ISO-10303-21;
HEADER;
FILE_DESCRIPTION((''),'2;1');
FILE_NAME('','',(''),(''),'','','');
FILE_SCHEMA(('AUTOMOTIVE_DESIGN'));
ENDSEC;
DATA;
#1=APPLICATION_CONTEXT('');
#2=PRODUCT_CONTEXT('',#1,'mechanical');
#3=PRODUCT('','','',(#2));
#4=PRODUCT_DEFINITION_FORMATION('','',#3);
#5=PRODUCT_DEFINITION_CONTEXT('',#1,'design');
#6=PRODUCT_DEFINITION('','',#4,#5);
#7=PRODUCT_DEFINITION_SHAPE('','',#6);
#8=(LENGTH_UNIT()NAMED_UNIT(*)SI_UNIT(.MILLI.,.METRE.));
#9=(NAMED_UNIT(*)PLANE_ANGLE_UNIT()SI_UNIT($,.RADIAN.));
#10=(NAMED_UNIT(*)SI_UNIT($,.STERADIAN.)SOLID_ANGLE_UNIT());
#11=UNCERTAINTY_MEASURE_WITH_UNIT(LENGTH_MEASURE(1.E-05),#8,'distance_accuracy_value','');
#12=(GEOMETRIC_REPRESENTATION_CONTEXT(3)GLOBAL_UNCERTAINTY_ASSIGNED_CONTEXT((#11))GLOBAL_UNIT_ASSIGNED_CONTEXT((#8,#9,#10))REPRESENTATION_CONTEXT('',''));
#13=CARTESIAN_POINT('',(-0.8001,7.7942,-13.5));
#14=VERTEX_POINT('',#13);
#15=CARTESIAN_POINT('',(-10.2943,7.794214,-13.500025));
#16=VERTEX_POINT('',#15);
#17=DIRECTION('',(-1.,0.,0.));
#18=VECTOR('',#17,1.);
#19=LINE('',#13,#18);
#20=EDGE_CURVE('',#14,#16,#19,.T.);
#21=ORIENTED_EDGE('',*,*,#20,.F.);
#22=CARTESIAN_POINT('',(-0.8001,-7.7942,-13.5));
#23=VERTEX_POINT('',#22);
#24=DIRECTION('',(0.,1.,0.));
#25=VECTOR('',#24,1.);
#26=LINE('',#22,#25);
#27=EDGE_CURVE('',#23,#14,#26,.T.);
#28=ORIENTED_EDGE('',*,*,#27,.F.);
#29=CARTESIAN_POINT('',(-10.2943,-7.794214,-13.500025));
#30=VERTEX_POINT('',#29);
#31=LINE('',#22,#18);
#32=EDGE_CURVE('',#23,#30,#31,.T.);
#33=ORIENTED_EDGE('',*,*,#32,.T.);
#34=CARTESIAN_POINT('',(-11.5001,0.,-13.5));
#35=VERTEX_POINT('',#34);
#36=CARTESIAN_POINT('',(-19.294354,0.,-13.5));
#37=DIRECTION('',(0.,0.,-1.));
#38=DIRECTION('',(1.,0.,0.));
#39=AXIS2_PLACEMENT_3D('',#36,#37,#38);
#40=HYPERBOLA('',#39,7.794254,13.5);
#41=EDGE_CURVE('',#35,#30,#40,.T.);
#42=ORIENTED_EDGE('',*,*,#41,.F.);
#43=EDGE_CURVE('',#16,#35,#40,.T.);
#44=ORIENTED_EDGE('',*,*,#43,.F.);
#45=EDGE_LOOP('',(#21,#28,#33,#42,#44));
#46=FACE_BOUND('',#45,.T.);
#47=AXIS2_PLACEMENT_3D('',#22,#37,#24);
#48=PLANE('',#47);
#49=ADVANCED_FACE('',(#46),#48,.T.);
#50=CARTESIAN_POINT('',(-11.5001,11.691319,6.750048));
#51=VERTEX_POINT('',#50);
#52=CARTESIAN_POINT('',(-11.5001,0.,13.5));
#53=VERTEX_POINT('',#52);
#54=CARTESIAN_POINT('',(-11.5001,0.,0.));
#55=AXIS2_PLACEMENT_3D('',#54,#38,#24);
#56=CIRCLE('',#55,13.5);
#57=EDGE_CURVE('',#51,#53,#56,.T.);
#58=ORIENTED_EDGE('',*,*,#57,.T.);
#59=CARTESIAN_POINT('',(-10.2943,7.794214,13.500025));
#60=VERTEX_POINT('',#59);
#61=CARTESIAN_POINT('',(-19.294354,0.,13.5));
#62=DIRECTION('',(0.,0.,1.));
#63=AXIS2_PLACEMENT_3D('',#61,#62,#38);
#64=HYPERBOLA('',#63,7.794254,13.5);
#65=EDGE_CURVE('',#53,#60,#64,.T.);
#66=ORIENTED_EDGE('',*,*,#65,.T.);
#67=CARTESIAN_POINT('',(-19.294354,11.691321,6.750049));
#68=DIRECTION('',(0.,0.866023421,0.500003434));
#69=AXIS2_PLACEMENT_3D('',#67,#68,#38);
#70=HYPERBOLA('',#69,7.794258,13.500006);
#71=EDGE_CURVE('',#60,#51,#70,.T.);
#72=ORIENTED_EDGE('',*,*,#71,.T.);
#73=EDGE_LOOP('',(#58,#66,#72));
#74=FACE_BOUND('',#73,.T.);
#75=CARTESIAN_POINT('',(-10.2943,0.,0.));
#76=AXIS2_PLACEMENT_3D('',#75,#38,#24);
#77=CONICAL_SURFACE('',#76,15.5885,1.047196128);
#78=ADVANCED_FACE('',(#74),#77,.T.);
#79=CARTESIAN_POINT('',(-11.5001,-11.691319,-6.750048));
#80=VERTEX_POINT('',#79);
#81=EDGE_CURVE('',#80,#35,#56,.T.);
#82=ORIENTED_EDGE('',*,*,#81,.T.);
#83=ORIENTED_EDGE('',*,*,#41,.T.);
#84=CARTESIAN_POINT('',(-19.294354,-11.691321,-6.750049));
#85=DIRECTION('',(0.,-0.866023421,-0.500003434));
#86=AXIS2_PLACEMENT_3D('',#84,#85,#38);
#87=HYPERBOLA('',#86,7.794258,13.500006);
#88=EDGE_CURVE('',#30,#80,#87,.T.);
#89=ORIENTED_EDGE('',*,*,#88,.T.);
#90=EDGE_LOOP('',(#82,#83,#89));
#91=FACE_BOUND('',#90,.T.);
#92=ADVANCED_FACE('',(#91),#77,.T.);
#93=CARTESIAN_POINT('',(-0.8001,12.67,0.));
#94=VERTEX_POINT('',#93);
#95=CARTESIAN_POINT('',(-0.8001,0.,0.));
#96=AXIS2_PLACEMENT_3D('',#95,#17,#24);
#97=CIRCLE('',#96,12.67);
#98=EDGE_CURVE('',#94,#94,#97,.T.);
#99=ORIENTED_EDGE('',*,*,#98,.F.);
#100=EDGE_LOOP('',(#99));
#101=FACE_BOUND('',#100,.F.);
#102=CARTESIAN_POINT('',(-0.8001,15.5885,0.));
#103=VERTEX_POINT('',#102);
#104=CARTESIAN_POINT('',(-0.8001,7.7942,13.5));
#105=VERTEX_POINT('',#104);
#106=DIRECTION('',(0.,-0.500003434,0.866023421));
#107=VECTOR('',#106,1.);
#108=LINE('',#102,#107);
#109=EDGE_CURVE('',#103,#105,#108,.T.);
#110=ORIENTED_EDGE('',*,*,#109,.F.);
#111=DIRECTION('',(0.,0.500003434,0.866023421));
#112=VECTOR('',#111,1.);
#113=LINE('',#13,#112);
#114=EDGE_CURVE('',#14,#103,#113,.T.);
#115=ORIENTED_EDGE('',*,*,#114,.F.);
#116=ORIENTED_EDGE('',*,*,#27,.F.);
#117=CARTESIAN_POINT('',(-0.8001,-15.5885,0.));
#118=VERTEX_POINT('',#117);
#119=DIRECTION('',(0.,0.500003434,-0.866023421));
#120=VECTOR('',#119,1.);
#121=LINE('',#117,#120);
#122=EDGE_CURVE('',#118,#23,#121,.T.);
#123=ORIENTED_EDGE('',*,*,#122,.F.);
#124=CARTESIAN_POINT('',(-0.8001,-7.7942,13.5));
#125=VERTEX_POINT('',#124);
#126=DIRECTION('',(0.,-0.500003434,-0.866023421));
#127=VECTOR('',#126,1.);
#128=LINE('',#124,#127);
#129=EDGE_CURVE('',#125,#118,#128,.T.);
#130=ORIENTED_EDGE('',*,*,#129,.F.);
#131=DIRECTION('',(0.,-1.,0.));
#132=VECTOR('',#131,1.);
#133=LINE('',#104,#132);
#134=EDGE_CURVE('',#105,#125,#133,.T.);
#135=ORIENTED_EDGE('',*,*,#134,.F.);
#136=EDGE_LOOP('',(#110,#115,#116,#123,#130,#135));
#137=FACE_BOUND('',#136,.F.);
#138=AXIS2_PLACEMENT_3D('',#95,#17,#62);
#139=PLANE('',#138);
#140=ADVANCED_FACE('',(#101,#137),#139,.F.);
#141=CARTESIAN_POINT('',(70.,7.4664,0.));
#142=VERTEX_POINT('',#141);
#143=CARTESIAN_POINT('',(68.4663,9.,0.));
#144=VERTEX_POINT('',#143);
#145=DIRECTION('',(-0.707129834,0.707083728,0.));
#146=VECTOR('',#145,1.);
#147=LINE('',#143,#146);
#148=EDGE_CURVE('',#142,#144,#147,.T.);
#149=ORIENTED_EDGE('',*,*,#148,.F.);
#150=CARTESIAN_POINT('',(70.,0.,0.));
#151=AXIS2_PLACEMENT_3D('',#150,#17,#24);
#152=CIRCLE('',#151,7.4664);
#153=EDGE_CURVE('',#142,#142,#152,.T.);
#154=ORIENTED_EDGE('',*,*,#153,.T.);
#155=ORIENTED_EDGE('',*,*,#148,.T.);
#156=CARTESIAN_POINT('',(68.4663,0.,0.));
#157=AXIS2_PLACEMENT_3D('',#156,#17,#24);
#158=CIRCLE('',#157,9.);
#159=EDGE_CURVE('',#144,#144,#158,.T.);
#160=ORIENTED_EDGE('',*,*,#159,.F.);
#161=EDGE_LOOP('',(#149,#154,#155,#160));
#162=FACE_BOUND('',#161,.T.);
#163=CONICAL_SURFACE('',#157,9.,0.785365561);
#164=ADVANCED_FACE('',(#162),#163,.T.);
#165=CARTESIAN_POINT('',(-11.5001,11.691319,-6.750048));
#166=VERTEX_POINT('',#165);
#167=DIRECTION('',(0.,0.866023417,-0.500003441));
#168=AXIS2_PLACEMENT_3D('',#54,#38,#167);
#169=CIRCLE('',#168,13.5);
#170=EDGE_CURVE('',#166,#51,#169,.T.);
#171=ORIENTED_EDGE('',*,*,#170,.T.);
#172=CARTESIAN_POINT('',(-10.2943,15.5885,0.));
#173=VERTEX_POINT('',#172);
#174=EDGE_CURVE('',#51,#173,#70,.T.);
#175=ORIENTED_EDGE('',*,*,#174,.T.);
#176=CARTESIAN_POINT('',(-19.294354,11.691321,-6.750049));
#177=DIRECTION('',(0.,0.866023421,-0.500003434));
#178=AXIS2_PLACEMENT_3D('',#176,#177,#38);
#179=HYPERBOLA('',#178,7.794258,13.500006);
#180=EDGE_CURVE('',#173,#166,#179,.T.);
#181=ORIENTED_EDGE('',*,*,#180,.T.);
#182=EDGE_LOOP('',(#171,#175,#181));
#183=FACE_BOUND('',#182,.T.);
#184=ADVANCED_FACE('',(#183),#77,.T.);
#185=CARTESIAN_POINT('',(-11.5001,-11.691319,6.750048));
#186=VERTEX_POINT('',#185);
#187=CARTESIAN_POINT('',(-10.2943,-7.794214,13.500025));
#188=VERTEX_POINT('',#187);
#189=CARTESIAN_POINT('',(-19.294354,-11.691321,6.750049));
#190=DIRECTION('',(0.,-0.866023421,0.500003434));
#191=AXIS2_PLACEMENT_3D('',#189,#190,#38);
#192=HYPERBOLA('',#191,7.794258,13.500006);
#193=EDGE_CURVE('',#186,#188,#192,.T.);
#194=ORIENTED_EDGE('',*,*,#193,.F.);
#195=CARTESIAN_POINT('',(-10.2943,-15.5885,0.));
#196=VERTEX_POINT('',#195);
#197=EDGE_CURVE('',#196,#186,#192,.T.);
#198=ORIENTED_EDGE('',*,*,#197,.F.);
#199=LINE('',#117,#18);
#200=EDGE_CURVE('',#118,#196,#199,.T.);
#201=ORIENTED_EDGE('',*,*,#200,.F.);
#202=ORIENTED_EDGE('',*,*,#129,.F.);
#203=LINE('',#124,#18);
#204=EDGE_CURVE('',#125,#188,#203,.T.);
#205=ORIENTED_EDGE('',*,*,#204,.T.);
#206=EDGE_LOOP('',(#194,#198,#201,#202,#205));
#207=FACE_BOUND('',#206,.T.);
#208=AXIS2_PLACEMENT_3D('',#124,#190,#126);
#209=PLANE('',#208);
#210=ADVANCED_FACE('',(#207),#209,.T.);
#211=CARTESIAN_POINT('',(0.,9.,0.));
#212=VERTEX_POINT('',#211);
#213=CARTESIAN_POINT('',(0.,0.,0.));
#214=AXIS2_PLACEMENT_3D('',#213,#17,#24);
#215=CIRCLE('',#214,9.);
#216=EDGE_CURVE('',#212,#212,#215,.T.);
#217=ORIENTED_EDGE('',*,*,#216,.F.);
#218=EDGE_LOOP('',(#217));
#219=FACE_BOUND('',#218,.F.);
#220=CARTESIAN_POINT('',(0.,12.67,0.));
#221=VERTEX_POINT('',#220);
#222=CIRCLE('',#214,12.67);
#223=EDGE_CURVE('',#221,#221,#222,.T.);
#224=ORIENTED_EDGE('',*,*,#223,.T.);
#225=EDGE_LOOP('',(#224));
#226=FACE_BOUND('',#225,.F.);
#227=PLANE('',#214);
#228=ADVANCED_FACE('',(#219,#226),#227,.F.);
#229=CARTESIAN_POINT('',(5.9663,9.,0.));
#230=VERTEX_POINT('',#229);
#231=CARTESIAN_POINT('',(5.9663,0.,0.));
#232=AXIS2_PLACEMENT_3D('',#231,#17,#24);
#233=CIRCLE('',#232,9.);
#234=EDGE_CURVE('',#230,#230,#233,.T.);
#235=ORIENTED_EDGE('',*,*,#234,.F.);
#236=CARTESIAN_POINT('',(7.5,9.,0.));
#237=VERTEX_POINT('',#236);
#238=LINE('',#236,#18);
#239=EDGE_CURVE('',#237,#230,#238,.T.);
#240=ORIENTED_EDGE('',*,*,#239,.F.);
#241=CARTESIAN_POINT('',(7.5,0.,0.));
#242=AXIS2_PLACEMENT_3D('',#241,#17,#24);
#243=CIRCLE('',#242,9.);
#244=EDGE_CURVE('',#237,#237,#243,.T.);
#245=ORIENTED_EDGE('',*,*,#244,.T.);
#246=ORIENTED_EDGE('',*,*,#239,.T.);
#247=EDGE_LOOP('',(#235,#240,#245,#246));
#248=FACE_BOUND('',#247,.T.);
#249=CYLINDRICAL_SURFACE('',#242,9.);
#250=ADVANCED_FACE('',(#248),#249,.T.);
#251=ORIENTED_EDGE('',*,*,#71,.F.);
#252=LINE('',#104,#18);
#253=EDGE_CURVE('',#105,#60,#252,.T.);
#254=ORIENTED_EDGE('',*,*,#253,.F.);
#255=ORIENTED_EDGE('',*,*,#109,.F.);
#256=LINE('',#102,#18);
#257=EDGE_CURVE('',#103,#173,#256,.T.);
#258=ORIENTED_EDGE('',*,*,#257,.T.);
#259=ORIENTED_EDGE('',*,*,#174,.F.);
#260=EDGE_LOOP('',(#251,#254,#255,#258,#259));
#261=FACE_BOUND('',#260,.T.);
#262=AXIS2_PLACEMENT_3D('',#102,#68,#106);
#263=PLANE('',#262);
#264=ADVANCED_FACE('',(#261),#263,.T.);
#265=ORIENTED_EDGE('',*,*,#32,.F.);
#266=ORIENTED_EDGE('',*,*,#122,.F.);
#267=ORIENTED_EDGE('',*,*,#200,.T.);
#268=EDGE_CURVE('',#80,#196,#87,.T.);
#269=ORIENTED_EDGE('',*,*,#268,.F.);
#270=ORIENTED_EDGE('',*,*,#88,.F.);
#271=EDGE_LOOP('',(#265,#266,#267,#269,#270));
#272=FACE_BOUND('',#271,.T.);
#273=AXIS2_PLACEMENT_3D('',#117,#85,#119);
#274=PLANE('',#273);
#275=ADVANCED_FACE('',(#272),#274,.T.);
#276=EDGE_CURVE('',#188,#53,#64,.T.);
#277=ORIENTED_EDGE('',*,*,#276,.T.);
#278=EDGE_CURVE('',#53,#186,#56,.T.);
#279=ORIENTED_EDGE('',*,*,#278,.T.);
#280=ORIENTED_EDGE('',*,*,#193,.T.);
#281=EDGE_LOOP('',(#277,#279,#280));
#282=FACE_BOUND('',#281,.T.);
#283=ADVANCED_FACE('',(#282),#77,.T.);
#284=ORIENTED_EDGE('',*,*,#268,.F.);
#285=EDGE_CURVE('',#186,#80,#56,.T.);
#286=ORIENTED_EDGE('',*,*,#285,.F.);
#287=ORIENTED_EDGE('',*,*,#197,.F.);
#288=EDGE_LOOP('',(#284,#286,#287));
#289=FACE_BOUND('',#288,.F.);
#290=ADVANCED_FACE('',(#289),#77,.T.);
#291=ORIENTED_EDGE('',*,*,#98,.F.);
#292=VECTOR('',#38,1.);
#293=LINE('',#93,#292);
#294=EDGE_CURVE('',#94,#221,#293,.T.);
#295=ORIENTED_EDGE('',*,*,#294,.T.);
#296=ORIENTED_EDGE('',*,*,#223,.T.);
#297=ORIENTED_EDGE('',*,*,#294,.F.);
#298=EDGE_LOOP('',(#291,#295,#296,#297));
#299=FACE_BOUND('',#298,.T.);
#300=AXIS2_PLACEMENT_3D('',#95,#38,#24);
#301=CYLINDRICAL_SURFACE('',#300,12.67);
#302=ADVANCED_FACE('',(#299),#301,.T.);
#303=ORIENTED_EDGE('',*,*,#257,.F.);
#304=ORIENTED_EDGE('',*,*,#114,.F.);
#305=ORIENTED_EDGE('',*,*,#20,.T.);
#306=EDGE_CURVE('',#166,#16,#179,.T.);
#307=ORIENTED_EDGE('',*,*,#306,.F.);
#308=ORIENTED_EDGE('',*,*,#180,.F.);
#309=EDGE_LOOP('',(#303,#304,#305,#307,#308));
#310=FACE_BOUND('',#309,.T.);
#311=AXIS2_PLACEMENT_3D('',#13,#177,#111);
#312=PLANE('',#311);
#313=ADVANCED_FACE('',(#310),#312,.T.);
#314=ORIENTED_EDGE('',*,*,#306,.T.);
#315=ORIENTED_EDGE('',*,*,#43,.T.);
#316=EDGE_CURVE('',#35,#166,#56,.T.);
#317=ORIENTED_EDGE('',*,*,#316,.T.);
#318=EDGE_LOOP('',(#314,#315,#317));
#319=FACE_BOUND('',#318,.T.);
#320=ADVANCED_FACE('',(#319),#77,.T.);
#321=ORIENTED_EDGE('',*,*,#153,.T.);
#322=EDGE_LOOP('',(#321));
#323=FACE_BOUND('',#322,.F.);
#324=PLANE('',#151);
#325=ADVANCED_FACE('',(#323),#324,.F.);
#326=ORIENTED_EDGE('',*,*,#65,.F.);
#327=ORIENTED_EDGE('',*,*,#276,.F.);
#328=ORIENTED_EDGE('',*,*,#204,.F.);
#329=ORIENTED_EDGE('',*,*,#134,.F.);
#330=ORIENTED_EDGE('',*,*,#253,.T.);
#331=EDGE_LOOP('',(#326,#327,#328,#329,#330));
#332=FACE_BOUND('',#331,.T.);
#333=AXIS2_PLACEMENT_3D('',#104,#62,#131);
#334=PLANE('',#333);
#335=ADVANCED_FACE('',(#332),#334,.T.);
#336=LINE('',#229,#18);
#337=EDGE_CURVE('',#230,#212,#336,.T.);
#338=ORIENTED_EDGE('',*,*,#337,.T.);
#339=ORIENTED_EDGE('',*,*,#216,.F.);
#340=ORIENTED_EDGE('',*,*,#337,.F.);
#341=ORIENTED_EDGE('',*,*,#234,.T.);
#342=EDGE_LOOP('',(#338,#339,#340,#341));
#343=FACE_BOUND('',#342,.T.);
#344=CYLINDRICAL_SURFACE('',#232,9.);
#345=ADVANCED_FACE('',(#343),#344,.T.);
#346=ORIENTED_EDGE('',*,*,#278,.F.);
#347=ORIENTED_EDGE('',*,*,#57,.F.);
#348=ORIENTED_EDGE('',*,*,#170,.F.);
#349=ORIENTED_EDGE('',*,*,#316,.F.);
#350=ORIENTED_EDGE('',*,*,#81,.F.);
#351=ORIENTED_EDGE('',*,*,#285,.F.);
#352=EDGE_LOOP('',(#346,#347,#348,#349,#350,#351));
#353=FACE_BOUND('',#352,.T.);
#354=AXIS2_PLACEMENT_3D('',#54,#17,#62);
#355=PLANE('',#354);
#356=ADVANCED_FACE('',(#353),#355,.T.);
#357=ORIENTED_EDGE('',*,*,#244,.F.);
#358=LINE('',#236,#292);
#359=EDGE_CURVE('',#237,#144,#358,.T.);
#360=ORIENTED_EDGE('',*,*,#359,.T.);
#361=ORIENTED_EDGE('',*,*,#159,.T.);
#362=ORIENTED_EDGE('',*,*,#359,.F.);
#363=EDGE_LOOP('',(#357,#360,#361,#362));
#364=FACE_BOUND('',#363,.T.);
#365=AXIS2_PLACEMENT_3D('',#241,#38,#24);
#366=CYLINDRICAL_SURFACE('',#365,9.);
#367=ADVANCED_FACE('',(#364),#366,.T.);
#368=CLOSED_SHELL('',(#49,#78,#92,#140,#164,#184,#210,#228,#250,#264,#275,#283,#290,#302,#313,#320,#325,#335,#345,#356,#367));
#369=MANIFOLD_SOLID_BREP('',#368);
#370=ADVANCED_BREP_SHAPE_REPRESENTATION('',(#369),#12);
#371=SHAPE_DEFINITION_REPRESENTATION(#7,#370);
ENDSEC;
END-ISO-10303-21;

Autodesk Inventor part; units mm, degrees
ref_plane "YZ Plane" through (0, 0, 0) normal (1, 0, 0) x (0, 1, 0)
ref_plane "XZ Plane" through (0, 0, 0) normal (0, 1, 0) x (-1, 0, 0)
sketch "Schizzo1" plane through (0, 0, 0) normal (0, 0, 1) x (1, 0, 0)
  line L0 (0, 12.67) -> (0, 9)
  line L1 (7.5, 9) -> (70, 9)
  line L2 (70, 9) -> (70, 0)
  line L3 (70, 0) -> (-0.8001, 0)
  line L4 (-14.9601, 0) -> (84.16, 0) projected
  line L5 (-0.8001, 0) -> (-0.8001, 12.67)
  line L6 (-0.8001, 12.67) -> (0, 12.67)
  line L7 (7.5, 9) -> (5.9663, 9)
  line L8 (5.9663, 9) -> (0, 9)
  line L9 (0, -2.534) -> (0, 15.204) projected
  dimension "d0" = 70
  dimension "d1" = 62.5
  dimension "d2" = 18
  dimension "d9" = 0.8001
  dimension "d10" = 25.34
  dimension "d13" = 1.5337
  dimension "d14" = 18
revolve "Corpo" add sketch "Schizzo1" angle 360 about axis through (70, 0, 0) along (-1, 0, 0)
sketch "Schizzo2" plane through (-0.8001, 0, 0) normal (-1, 0, 0) x (0, 0, 1)
  line L0 (0, 15.5885) -> (13.5, 7.7942)
  line L1 (13.5, 7.7942) -> (13.5, -7.7942)
  line L2 (13.5, -7.7942) -> (0, -15.5885)
  line L3 (0, -15.5885) -> (-13.5, -7.7942)
  line L4 (-13.5, -7.7942) -> (-13.5, 7.7942)
  line L5 (-13.5, 7.7942) -> (0, 15.5885)
  point P0 (0, 0)
  point P1 (0, 0)
  dimension "d11" = 27
extrude "Testa" add sketch "Schizzo2" along normal blind 10.7
sketch "Schizzo4" plane through (0, 0, 0) normal (0, 0, 1) x (1, 0, 0)
  line L0 (-11.5001, 13.5) -> (-11.5001, 15.5885)
  line L1 (-11.5001, 15.5885) -> (-10.2943, 15.5885)
  line L2 (-10.2943, 15.5885) -> (-11.5001, 13.5)
  line L3 (-13.6401, 0) -> (1.3399, 0) projected
  line L4 (-0.8001, 15.5885) -> (-11.5001, 15.5885) projected
  line L5 (-11.5001, 7.7942) -> (-11.5001, 15.5885) projected
  dimension "d5" = 30
  dimension "d19" = 27
revolve "Smusso1" cut sketch "Schizzo4" angle 360 about axis through (-10, 0, 0) along (1, 0, 0)
thread "Filettatura" size "M18x2.5" class "6g" standard "ISO Metric profile" length 62.5
chamfer "Smusso2" distance 1.5336 distance2 1.5337 1 edges at (70, -9, 0) measured on face at (70, 2.9128, -2.0704)
ref_plane "Work Plane1" through (1.525, 0, 0) normal (0, 0, 1) x (1, 0, 0)
equation "\"d0\" = NLG"
equation "\"d1\" = GEL"
equation "\"d2\" = GD"
equation "\"d10\" = SD2"
equation "\"d14\" = BDM"
equation "\"d11\" = SW"
equation "\"d3\" = KOH - SD"
equation "\"d5\" = ANG1"
equation "\"d19\" = SW0"
equation "\"d15\" = GEL"
equation "\"d6\" = -0.5 * SPD + 0.5 * GD"
equation "\"NLG\" = 70"
equation "\"GD\" = NND"
equation "\"BDM\" = NND"
equation "\"KOH\" = 11.5"
equation "\"GEL\" = 62.5"
equation "\"SW\" = 27"
equation "\"SW0\" = SW"
equation "\"SPD\" = NND - 1.2269 * PTC"
equation "\"SD2\" = 25.34"
equation "\"SD\" = 0.8"
equation "\"ANG1\" = 30deg"
equation "\"GAL\" = 0.61345 * PTC"
equation "\"GUL\" = 0.61345 * PTC"
equation "\"RR\" = 0.6"
equation "\"GD1\" = THREADDIA - 1.2269 * PTC"
equation "\"THREADDIA\" = 18"
equation "\"SDH\" = SD2"
equation "\"SDHG\" = 7.5"
equation "\"TOA\" = 30deg"
equation "\"PTC\" = 2.5"
equation "\"NND\" = 18"
equation "\"E0\" = 31.185"
properties part number "BS EN ISO 4017 - M18 x 70" material "Acciaio inox, 440C"
